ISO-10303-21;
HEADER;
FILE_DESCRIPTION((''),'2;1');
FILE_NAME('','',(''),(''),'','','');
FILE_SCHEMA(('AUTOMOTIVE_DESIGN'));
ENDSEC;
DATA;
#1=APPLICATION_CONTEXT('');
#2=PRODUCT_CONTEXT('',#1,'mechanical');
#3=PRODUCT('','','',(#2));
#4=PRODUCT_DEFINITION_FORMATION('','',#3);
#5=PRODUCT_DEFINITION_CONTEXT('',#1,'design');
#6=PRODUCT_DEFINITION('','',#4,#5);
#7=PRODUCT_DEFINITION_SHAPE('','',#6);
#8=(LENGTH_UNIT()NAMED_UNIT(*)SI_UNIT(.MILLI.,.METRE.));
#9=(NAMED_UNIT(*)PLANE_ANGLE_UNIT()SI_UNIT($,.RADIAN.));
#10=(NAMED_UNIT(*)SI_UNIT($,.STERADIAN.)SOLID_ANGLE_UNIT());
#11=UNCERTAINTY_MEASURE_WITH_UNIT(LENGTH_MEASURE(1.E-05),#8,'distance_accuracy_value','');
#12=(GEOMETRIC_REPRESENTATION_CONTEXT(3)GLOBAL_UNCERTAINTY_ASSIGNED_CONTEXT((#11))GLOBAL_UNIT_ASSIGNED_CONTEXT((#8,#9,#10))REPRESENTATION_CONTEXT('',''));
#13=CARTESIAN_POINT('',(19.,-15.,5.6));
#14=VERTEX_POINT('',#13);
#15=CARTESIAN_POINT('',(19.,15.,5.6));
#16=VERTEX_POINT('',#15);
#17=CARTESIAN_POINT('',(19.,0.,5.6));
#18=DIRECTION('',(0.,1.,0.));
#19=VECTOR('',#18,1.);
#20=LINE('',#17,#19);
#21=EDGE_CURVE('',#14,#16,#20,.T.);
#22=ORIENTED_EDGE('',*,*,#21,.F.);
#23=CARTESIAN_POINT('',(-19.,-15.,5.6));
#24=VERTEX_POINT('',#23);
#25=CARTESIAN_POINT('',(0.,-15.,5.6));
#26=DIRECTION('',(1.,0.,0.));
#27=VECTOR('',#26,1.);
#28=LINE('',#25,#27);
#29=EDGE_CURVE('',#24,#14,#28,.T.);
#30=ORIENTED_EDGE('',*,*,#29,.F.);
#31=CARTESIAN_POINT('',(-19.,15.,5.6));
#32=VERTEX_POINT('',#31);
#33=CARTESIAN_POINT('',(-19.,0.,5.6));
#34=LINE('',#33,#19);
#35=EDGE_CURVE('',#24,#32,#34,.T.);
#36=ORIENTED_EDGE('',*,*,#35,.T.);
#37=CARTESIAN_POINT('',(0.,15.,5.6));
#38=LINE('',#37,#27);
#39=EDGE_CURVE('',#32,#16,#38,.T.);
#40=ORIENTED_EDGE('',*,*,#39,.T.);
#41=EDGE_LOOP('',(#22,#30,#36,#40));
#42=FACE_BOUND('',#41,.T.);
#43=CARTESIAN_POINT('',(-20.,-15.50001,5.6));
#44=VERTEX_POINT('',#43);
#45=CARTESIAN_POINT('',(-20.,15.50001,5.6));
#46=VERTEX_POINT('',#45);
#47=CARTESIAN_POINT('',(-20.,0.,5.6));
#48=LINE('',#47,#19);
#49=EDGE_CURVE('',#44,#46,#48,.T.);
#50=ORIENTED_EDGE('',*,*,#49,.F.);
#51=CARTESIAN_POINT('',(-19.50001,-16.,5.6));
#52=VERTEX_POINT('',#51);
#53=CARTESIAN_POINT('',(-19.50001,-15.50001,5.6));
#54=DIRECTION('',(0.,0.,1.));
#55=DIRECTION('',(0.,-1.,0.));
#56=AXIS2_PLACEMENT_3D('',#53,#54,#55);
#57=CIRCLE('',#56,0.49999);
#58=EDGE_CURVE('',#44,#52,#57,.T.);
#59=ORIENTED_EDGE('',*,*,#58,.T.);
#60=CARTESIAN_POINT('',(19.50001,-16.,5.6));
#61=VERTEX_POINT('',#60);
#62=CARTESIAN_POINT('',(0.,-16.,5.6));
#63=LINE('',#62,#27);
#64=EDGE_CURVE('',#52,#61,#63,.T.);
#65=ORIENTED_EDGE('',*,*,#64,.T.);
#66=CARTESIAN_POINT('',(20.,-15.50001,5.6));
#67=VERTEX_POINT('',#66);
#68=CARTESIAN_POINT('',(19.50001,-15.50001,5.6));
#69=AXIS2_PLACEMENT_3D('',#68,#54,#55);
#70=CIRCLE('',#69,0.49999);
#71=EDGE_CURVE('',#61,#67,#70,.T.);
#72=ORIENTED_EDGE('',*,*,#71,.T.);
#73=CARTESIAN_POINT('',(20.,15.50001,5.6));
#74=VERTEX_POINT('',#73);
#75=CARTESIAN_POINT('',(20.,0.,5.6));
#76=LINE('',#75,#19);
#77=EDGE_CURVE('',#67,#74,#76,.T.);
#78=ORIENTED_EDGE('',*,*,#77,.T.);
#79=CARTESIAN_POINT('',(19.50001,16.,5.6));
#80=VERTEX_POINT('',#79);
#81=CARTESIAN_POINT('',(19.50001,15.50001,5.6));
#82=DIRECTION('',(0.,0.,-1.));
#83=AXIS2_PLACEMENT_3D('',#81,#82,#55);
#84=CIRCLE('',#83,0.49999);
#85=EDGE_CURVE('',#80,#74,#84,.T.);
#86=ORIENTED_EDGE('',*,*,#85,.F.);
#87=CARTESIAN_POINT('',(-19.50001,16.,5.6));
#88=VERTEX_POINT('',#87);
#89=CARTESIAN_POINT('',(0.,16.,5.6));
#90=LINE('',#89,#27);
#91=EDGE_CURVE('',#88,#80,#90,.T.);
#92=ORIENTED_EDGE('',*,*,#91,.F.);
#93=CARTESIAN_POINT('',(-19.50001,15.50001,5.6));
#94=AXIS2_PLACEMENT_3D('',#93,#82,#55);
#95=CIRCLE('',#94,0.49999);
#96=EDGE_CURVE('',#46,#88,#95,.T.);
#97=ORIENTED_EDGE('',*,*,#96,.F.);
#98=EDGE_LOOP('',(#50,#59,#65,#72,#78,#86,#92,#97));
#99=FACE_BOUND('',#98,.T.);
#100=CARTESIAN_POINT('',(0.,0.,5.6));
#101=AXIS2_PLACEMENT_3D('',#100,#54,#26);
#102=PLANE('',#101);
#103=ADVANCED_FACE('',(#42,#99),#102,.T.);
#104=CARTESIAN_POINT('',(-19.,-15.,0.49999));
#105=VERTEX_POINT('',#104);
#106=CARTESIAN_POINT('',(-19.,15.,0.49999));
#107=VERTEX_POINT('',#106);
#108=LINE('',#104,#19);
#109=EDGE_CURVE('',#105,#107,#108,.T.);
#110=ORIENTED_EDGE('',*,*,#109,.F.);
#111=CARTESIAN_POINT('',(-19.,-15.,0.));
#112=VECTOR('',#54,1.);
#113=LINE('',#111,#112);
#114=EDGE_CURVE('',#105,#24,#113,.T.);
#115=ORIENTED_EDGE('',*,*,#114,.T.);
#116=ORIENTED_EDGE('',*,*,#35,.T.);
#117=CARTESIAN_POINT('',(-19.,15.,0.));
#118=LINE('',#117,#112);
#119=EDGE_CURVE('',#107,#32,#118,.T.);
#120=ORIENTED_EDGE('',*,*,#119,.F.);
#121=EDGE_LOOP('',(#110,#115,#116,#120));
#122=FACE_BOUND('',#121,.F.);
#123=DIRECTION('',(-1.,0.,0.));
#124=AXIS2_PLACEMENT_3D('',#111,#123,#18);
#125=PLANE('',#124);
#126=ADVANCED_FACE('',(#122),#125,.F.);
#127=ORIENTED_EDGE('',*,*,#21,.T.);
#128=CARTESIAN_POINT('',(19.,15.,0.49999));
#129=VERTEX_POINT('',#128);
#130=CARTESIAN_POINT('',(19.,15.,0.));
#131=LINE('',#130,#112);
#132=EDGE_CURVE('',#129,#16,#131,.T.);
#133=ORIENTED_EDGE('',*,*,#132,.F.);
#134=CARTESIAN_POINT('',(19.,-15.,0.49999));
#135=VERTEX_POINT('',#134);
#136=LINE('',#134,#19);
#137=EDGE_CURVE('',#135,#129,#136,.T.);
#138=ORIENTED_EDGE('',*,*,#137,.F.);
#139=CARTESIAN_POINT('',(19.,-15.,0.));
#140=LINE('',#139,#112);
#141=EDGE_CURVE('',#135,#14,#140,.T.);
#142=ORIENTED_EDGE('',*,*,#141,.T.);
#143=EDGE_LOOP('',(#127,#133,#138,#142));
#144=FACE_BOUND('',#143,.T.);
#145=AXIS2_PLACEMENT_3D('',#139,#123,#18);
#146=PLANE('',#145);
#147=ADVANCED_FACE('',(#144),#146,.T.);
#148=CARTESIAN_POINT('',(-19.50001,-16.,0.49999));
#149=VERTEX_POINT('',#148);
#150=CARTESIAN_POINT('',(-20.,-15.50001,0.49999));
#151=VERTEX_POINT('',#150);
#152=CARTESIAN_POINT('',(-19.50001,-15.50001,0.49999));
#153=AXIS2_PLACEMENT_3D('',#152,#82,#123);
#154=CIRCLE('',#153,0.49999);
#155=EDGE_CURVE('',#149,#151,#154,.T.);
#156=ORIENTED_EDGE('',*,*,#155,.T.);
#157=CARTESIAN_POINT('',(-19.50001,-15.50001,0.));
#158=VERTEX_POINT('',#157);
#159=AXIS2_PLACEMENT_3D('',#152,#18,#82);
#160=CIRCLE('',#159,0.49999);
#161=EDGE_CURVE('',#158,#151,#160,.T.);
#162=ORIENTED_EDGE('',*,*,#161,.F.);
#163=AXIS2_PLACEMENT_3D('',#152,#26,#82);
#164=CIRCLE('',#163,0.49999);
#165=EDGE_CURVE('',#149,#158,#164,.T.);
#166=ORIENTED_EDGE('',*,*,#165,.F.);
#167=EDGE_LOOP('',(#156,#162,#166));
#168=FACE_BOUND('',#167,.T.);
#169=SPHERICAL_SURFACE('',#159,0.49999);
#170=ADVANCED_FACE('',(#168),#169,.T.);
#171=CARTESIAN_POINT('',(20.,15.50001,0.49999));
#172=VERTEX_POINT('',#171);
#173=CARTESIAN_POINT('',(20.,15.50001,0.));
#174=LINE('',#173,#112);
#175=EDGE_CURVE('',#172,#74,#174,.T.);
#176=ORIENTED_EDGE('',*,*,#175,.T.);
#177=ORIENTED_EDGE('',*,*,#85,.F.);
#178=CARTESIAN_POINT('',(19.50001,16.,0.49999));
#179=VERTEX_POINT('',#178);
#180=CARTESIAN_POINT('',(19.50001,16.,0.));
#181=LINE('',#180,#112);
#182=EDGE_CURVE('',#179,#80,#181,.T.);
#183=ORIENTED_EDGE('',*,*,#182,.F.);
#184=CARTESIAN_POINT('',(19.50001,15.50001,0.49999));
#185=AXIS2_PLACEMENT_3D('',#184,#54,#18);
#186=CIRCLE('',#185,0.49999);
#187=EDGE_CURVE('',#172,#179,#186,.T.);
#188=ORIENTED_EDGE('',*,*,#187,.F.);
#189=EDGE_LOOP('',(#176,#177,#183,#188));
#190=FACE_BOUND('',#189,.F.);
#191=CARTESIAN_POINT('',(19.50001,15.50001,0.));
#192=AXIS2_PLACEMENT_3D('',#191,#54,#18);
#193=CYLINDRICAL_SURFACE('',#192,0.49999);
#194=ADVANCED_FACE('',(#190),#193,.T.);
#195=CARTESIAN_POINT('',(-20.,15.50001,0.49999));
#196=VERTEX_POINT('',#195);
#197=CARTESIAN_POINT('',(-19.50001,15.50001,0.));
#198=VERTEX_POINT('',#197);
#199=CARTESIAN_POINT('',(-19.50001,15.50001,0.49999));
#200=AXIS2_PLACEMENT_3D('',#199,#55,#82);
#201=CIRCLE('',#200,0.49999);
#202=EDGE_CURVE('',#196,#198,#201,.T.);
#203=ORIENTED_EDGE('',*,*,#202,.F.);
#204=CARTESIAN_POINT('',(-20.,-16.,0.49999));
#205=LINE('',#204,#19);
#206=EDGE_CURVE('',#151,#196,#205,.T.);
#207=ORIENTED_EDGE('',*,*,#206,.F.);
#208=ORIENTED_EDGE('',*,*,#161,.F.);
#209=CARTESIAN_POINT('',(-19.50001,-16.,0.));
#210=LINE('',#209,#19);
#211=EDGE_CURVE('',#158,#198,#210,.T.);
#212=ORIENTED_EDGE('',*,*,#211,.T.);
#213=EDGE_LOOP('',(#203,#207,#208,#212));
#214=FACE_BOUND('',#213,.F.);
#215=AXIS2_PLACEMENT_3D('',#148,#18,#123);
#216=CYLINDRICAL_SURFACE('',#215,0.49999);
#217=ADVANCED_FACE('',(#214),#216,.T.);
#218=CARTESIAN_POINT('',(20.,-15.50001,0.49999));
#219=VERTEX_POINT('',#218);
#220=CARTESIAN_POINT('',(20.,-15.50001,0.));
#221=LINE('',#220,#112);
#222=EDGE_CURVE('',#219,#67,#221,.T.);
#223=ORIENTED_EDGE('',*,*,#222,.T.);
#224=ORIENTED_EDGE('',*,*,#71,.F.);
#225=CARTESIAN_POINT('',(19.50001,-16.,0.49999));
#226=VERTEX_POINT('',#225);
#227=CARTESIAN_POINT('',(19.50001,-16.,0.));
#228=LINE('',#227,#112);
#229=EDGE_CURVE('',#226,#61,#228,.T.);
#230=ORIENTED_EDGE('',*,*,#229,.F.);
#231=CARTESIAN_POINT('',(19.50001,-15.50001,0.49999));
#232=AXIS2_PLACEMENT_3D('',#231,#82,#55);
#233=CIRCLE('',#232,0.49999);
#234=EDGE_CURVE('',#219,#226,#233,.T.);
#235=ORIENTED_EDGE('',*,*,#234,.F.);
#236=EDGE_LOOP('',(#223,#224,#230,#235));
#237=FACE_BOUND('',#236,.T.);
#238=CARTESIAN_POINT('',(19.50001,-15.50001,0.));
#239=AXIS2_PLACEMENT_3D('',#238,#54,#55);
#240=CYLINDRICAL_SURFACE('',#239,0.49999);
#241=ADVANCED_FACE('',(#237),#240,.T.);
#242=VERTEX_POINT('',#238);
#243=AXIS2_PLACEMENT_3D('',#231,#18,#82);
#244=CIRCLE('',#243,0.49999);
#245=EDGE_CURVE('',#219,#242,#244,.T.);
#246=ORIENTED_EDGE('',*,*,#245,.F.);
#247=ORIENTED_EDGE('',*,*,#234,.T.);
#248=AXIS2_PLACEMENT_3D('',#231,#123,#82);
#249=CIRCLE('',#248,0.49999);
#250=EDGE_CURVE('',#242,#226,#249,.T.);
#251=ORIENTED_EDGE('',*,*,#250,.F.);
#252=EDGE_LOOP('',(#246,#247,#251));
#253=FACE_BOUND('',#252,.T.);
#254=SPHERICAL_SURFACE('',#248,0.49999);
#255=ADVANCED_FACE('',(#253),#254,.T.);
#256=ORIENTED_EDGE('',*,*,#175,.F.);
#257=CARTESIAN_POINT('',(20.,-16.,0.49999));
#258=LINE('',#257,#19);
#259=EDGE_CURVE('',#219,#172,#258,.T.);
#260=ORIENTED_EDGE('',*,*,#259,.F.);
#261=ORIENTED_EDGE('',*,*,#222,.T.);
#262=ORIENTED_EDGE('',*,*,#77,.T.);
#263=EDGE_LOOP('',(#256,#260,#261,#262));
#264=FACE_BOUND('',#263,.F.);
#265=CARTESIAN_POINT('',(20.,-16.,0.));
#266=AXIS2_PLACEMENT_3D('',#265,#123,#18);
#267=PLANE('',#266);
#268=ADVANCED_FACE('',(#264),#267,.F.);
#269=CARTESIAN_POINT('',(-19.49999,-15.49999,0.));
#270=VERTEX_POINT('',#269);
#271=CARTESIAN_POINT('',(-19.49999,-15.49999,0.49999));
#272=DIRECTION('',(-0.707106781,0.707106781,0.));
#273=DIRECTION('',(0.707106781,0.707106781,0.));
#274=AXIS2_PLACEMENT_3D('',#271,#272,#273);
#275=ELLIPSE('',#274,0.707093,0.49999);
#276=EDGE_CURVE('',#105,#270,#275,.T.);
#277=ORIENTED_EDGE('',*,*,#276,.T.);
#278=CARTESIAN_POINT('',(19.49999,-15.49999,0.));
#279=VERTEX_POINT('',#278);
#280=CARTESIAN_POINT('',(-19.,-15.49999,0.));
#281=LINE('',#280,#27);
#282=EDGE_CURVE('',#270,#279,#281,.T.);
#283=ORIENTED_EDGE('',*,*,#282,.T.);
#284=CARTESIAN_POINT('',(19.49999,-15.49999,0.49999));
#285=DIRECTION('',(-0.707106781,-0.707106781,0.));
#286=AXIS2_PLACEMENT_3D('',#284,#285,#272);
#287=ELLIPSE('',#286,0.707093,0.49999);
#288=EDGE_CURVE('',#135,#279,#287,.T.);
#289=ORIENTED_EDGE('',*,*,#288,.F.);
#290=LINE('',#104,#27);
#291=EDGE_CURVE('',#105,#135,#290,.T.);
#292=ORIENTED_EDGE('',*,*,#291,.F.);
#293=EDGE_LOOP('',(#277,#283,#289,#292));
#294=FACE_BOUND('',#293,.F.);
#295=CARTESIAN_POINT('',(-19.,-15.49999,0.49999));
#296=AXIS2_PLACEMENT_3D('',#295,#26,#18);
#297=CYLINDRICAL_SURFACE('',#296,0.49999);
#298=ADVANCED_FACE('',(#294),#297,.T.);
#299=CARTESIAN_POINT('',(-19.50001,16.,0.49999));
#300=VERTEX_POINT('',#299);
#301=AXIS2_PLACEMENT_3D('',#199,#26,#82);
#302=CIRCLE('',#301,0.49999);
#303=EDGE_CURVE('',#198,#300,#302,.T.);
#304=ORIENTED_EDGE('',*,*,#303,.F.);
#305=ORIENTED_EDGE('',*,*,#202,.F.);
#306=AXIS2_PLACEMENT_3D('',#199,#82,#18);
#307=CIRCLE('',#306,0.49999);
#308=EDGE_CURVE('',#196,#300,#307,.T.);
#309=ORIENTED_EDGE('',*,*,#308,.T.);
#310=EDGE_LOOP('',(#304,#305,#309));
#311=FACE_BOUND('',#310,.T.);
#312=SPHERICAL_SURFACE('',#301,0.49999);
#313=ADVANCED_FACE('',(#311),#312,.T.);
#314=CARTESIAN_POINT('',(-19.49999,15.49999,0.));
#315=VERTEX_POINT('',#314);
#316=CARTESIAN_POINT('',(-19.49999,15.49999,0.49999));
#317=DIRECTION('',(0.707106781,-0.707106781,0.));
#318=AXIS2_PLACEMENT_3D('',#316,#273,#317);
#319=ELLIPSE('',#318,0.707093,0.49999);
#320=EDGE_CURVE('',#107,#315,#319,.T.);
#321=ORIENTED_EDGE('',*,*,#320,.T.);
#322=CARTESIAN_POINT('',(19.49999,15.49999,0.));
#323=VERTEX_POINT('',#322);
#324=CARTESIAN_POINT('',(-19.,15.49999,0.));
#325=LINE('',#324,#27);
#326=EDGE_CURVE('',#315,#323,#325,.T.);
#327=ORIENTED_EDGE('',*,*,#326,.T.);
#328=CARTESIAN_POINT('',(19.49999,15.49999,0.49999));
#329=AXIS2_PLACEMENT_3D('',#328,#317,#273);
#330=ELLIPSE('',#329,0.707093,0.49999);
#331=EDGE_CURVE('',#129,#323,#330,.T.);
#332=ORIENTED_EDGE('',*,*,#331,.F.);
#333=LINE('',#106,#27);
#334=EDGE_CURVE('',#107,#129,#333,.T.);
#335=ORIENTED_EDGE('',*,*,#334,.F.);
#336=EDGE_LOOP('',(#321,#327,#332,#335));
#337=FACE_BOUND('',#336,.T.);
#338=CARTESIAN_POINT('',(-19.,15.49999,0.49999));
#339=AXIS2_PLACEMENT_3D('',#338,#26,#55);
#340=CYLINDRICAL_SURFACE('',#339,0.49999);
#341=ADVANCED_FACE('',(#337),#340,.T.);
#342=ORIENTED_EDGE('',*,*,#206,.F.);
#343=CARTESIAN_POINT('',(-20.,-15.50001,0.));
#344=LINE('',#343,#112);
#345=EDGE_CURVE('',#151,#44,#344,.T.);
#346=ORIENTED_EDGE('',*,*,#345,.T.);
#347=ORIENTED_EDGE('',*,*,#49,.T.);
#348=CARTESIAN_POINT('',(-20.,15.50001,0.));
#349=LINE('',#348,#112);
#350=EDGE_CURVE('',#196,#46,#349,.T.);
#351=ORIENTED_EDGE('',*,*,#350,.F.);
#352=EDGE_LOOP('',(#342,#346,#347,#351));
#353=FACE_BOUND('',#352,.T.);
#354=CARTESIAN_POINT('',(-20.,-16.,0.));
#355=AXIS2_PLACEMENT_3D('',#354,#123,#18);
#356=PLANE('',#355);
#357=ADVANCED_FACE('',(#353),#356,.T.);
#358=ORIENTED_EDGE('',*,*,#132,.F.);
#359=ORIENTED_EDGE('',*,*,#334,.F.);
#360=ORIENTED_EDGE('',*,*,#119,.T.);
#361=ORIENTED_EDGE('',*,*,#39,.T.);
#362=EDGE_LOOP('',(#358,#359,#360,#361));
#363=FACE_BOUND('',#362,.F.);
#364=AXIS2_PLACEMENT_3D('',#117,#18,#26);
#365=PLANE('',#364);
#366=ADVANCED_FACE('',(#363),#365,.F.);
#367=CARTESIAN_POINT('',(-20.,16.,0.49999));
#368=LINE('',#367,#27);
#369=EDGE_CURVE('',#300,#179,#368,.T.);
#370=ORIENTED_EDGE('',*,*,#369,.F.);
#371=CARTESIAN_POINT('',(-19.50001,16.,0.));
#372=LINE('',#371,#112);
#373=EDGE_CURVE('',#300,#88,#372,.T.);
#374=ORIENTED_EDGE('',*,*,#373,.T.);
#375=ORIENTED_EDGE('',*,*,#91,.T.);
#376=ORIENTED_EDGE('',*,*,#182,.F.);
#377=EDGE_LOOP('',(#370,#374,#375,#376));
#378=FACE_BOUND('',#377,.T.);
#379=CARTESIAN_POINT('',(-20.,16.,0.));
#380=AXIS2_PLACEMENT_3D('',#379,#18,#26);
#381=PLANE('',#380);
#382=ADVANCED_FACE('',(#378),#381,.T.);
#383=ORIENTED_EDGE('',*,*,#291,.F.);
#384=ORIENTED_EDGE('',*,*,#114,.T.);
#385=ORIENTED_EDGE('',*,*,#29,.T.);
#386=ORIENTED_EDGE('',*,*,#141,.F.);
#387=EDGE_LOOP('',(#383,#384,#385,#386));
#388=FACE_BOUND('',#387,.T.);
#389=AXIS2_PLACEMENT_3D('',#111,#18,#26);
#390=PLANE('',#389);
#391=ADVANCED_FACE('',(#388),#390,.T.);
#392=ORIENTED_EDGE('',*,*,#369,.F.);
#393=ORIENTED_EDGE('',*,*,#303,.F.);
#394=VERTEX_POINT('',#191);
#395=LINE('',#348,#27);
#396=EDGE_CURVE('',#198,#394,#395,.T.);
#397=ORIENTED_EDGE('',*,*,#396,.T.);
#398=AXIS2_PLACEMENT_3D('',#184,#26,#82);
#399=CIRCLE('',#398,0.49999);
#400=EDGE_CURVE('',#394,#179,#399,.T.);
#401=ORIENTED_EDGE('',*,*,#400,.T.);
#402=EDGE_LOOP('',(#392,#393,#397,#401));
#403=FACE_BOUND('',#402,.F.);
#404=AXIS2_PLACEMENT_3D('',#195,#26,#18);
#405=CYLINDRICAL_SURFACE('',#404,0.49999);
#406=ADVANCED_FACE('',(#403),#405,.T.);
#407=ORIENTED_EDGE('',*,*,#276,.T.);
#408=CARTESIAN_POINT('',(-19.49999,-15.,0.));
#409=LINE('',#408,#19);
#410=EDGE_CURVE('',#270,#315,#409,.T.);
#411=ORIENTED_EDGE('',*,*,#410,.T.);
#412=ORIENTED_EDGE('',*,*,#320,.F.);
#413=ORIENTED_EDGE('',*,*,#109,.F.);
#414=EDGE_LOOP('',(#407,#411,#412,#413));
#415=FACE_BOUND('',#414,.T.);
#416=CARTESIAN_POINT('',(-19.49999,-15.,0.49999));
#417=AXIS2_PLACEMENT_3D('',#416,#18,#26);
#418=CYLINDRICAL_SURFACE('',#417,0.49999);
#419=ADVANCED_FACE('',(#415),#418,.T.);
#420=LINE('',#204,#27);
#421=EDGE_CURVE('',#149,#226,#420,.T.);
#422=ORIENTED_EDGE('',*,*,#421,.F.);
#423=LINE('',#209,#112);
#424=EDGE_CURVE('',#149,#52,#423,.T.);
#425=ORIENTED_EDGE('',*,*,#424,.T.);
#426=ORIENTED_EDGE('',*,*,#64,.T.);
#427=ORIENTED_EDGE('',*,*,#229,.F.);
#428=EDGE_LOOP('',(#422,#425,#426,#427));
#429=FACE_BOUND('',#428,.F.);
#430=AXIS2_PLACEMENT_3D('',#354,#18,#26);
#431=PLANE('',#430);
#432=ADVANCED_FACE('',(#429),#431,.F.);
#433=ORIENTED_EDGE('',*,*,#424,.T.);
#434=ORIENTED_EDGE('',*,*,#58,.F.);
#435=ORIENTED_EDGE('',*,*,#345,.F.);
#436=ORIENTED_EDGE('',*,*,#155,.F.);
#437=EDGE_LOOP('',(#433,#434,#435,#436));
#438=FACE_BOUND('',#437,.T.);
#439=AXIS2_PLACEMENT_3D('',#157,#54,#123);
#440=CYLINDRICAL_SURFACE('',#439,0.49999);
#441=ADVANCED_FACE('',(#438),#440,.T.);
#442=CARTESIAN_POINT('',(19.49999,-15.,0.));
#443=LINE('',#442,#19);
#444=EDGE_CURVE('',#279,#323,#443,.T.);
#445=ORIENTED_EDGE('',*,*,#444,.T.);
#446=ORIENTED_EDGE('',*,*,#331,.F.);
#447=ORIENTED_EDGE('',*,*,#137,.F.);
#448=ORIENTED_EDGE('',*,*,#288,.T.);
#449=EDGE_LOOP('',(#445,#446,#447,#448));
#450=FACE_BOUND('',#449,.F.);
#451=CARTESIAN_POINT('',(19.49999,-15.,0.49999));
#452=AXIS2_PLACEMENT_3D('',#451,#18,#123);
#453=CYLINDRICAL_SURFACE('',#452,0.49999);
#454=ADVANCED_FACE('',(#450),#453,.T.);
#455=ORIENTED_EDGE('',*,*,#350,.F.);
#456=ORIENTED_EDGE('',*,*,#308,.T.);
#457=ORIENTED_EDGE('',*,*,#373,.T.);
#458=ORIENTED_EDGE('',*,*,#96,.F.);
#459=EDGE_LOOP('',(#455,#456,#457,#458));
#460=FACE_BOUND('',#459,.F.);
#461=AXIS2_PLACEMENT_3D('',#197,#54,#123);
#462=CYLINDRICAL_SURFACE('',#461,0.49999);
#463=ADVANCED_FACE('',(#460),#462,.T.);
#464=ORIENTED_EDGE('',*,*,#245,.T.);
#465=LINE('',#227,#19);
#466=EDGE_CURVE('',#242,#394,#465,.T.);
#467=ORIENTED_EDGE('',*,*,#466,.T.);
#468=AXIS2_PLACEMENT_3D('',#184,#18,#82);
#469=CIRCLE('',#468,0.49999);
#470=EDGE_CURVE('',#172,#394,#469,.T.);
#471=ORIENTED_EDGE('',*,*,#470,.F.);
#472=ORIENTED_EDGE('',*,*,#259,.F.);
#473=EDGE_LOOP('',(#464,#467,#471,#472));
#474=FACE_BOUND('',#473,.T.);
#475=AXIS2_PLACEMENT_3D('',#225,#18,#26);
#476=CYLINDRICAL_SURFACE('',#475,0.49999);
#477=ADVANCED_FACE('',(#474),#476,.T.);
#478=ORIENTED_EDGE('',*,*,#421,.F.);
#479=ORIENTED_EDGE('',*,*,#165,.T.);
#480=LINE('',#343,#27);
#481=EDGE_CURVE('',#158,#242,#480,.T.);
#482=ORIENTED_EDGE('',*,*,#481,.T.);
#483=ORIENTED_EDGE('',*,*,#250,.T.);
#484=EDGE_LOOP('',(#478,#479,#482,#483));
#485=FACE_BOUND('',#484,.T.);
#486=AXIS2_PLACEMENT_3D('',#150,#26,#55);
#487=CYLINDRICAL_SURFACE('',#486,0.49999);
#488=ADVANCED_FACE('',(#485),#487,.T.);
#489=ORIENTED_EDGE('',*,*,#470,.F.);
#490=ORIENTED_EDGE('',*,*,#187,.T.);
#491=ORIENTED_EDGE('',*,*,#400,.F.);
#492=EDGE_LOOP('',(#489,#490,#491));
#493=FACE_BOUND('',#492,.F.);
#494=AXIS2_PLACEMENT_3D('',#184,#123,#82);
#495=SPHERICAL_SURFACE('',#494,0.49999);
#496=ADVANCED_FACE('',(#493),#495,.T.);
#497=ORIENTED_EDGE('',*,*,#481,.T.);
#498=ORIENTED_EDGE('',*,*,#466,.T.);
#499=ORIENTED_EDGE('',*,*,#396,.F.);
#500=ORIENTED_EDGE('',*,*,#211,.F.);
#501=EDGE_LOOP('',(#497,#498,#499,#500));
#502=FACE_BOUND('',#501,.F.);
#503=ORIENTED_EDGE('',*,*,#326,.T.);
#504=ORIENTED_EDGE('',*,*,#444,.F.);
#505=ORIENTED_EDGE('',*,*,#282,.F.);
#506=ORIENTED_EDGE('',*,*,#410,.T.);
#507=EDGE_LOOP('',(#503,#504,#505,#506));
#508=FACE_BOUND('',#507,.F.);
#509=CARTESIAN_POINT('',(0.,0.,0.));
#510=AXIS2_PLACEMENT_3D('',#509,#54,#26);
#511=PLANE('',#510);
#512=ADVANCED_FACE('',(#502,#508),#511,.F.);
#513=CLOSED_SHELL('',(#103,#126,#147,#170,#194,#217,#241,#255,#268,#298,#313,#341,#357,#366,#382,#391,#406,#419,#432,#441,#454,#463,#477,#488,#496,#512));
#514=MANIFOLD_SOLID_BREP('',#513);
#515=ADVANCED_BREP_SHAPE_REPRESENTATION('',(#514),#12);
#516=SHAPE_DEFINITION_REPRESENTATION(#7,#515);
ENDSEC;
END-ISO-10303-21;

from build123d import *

# Parameters (mm, degrees)
F0_W     = 40
F0_H     = 32
F0_W_2   = 38
F0_H_2   = 30
F1_DEPTH = 5.6
F2_R     = 0.49999


# Not quite as in the source:
# - a fillet or chamfer is up to 0.001 mm smaller than in the source, because OpenCascade refuses the exact size


with BuildPart() as f1:
    # F0 (on Top) → F1 (new body)
    with BuildSketch(Plane.XY):
        Rectangle(F0_W, F0_H)
        Rectangle(F0_W_2, F0_H_2, mode=Mode.SUBTRACT)
    extrude(amount=F1_DEPTH)

    # F2 (radius 0.5 in the source; OpenCascade refuses exactly that, so slightly less here)
    f2_edges = [f1.edges().sort_by_distance(p)[0] for p in [
        (0, 16, 0),
        (-20, 0, 0),
        (0, -16, 0),
        (20, 0, 0),
        (0, 15, 0),
        (19, 0, 0),
        (0, -15, 0),
        (-19, 0, 0),
        (-20, -16, 2.8),
        (20, -16, 2.8),
        (-20, 16, 2.8),
        (20, 16, 2.8),
    ]]
    fillet(f2_edges, radius=F2_R)


solid = f1.part
